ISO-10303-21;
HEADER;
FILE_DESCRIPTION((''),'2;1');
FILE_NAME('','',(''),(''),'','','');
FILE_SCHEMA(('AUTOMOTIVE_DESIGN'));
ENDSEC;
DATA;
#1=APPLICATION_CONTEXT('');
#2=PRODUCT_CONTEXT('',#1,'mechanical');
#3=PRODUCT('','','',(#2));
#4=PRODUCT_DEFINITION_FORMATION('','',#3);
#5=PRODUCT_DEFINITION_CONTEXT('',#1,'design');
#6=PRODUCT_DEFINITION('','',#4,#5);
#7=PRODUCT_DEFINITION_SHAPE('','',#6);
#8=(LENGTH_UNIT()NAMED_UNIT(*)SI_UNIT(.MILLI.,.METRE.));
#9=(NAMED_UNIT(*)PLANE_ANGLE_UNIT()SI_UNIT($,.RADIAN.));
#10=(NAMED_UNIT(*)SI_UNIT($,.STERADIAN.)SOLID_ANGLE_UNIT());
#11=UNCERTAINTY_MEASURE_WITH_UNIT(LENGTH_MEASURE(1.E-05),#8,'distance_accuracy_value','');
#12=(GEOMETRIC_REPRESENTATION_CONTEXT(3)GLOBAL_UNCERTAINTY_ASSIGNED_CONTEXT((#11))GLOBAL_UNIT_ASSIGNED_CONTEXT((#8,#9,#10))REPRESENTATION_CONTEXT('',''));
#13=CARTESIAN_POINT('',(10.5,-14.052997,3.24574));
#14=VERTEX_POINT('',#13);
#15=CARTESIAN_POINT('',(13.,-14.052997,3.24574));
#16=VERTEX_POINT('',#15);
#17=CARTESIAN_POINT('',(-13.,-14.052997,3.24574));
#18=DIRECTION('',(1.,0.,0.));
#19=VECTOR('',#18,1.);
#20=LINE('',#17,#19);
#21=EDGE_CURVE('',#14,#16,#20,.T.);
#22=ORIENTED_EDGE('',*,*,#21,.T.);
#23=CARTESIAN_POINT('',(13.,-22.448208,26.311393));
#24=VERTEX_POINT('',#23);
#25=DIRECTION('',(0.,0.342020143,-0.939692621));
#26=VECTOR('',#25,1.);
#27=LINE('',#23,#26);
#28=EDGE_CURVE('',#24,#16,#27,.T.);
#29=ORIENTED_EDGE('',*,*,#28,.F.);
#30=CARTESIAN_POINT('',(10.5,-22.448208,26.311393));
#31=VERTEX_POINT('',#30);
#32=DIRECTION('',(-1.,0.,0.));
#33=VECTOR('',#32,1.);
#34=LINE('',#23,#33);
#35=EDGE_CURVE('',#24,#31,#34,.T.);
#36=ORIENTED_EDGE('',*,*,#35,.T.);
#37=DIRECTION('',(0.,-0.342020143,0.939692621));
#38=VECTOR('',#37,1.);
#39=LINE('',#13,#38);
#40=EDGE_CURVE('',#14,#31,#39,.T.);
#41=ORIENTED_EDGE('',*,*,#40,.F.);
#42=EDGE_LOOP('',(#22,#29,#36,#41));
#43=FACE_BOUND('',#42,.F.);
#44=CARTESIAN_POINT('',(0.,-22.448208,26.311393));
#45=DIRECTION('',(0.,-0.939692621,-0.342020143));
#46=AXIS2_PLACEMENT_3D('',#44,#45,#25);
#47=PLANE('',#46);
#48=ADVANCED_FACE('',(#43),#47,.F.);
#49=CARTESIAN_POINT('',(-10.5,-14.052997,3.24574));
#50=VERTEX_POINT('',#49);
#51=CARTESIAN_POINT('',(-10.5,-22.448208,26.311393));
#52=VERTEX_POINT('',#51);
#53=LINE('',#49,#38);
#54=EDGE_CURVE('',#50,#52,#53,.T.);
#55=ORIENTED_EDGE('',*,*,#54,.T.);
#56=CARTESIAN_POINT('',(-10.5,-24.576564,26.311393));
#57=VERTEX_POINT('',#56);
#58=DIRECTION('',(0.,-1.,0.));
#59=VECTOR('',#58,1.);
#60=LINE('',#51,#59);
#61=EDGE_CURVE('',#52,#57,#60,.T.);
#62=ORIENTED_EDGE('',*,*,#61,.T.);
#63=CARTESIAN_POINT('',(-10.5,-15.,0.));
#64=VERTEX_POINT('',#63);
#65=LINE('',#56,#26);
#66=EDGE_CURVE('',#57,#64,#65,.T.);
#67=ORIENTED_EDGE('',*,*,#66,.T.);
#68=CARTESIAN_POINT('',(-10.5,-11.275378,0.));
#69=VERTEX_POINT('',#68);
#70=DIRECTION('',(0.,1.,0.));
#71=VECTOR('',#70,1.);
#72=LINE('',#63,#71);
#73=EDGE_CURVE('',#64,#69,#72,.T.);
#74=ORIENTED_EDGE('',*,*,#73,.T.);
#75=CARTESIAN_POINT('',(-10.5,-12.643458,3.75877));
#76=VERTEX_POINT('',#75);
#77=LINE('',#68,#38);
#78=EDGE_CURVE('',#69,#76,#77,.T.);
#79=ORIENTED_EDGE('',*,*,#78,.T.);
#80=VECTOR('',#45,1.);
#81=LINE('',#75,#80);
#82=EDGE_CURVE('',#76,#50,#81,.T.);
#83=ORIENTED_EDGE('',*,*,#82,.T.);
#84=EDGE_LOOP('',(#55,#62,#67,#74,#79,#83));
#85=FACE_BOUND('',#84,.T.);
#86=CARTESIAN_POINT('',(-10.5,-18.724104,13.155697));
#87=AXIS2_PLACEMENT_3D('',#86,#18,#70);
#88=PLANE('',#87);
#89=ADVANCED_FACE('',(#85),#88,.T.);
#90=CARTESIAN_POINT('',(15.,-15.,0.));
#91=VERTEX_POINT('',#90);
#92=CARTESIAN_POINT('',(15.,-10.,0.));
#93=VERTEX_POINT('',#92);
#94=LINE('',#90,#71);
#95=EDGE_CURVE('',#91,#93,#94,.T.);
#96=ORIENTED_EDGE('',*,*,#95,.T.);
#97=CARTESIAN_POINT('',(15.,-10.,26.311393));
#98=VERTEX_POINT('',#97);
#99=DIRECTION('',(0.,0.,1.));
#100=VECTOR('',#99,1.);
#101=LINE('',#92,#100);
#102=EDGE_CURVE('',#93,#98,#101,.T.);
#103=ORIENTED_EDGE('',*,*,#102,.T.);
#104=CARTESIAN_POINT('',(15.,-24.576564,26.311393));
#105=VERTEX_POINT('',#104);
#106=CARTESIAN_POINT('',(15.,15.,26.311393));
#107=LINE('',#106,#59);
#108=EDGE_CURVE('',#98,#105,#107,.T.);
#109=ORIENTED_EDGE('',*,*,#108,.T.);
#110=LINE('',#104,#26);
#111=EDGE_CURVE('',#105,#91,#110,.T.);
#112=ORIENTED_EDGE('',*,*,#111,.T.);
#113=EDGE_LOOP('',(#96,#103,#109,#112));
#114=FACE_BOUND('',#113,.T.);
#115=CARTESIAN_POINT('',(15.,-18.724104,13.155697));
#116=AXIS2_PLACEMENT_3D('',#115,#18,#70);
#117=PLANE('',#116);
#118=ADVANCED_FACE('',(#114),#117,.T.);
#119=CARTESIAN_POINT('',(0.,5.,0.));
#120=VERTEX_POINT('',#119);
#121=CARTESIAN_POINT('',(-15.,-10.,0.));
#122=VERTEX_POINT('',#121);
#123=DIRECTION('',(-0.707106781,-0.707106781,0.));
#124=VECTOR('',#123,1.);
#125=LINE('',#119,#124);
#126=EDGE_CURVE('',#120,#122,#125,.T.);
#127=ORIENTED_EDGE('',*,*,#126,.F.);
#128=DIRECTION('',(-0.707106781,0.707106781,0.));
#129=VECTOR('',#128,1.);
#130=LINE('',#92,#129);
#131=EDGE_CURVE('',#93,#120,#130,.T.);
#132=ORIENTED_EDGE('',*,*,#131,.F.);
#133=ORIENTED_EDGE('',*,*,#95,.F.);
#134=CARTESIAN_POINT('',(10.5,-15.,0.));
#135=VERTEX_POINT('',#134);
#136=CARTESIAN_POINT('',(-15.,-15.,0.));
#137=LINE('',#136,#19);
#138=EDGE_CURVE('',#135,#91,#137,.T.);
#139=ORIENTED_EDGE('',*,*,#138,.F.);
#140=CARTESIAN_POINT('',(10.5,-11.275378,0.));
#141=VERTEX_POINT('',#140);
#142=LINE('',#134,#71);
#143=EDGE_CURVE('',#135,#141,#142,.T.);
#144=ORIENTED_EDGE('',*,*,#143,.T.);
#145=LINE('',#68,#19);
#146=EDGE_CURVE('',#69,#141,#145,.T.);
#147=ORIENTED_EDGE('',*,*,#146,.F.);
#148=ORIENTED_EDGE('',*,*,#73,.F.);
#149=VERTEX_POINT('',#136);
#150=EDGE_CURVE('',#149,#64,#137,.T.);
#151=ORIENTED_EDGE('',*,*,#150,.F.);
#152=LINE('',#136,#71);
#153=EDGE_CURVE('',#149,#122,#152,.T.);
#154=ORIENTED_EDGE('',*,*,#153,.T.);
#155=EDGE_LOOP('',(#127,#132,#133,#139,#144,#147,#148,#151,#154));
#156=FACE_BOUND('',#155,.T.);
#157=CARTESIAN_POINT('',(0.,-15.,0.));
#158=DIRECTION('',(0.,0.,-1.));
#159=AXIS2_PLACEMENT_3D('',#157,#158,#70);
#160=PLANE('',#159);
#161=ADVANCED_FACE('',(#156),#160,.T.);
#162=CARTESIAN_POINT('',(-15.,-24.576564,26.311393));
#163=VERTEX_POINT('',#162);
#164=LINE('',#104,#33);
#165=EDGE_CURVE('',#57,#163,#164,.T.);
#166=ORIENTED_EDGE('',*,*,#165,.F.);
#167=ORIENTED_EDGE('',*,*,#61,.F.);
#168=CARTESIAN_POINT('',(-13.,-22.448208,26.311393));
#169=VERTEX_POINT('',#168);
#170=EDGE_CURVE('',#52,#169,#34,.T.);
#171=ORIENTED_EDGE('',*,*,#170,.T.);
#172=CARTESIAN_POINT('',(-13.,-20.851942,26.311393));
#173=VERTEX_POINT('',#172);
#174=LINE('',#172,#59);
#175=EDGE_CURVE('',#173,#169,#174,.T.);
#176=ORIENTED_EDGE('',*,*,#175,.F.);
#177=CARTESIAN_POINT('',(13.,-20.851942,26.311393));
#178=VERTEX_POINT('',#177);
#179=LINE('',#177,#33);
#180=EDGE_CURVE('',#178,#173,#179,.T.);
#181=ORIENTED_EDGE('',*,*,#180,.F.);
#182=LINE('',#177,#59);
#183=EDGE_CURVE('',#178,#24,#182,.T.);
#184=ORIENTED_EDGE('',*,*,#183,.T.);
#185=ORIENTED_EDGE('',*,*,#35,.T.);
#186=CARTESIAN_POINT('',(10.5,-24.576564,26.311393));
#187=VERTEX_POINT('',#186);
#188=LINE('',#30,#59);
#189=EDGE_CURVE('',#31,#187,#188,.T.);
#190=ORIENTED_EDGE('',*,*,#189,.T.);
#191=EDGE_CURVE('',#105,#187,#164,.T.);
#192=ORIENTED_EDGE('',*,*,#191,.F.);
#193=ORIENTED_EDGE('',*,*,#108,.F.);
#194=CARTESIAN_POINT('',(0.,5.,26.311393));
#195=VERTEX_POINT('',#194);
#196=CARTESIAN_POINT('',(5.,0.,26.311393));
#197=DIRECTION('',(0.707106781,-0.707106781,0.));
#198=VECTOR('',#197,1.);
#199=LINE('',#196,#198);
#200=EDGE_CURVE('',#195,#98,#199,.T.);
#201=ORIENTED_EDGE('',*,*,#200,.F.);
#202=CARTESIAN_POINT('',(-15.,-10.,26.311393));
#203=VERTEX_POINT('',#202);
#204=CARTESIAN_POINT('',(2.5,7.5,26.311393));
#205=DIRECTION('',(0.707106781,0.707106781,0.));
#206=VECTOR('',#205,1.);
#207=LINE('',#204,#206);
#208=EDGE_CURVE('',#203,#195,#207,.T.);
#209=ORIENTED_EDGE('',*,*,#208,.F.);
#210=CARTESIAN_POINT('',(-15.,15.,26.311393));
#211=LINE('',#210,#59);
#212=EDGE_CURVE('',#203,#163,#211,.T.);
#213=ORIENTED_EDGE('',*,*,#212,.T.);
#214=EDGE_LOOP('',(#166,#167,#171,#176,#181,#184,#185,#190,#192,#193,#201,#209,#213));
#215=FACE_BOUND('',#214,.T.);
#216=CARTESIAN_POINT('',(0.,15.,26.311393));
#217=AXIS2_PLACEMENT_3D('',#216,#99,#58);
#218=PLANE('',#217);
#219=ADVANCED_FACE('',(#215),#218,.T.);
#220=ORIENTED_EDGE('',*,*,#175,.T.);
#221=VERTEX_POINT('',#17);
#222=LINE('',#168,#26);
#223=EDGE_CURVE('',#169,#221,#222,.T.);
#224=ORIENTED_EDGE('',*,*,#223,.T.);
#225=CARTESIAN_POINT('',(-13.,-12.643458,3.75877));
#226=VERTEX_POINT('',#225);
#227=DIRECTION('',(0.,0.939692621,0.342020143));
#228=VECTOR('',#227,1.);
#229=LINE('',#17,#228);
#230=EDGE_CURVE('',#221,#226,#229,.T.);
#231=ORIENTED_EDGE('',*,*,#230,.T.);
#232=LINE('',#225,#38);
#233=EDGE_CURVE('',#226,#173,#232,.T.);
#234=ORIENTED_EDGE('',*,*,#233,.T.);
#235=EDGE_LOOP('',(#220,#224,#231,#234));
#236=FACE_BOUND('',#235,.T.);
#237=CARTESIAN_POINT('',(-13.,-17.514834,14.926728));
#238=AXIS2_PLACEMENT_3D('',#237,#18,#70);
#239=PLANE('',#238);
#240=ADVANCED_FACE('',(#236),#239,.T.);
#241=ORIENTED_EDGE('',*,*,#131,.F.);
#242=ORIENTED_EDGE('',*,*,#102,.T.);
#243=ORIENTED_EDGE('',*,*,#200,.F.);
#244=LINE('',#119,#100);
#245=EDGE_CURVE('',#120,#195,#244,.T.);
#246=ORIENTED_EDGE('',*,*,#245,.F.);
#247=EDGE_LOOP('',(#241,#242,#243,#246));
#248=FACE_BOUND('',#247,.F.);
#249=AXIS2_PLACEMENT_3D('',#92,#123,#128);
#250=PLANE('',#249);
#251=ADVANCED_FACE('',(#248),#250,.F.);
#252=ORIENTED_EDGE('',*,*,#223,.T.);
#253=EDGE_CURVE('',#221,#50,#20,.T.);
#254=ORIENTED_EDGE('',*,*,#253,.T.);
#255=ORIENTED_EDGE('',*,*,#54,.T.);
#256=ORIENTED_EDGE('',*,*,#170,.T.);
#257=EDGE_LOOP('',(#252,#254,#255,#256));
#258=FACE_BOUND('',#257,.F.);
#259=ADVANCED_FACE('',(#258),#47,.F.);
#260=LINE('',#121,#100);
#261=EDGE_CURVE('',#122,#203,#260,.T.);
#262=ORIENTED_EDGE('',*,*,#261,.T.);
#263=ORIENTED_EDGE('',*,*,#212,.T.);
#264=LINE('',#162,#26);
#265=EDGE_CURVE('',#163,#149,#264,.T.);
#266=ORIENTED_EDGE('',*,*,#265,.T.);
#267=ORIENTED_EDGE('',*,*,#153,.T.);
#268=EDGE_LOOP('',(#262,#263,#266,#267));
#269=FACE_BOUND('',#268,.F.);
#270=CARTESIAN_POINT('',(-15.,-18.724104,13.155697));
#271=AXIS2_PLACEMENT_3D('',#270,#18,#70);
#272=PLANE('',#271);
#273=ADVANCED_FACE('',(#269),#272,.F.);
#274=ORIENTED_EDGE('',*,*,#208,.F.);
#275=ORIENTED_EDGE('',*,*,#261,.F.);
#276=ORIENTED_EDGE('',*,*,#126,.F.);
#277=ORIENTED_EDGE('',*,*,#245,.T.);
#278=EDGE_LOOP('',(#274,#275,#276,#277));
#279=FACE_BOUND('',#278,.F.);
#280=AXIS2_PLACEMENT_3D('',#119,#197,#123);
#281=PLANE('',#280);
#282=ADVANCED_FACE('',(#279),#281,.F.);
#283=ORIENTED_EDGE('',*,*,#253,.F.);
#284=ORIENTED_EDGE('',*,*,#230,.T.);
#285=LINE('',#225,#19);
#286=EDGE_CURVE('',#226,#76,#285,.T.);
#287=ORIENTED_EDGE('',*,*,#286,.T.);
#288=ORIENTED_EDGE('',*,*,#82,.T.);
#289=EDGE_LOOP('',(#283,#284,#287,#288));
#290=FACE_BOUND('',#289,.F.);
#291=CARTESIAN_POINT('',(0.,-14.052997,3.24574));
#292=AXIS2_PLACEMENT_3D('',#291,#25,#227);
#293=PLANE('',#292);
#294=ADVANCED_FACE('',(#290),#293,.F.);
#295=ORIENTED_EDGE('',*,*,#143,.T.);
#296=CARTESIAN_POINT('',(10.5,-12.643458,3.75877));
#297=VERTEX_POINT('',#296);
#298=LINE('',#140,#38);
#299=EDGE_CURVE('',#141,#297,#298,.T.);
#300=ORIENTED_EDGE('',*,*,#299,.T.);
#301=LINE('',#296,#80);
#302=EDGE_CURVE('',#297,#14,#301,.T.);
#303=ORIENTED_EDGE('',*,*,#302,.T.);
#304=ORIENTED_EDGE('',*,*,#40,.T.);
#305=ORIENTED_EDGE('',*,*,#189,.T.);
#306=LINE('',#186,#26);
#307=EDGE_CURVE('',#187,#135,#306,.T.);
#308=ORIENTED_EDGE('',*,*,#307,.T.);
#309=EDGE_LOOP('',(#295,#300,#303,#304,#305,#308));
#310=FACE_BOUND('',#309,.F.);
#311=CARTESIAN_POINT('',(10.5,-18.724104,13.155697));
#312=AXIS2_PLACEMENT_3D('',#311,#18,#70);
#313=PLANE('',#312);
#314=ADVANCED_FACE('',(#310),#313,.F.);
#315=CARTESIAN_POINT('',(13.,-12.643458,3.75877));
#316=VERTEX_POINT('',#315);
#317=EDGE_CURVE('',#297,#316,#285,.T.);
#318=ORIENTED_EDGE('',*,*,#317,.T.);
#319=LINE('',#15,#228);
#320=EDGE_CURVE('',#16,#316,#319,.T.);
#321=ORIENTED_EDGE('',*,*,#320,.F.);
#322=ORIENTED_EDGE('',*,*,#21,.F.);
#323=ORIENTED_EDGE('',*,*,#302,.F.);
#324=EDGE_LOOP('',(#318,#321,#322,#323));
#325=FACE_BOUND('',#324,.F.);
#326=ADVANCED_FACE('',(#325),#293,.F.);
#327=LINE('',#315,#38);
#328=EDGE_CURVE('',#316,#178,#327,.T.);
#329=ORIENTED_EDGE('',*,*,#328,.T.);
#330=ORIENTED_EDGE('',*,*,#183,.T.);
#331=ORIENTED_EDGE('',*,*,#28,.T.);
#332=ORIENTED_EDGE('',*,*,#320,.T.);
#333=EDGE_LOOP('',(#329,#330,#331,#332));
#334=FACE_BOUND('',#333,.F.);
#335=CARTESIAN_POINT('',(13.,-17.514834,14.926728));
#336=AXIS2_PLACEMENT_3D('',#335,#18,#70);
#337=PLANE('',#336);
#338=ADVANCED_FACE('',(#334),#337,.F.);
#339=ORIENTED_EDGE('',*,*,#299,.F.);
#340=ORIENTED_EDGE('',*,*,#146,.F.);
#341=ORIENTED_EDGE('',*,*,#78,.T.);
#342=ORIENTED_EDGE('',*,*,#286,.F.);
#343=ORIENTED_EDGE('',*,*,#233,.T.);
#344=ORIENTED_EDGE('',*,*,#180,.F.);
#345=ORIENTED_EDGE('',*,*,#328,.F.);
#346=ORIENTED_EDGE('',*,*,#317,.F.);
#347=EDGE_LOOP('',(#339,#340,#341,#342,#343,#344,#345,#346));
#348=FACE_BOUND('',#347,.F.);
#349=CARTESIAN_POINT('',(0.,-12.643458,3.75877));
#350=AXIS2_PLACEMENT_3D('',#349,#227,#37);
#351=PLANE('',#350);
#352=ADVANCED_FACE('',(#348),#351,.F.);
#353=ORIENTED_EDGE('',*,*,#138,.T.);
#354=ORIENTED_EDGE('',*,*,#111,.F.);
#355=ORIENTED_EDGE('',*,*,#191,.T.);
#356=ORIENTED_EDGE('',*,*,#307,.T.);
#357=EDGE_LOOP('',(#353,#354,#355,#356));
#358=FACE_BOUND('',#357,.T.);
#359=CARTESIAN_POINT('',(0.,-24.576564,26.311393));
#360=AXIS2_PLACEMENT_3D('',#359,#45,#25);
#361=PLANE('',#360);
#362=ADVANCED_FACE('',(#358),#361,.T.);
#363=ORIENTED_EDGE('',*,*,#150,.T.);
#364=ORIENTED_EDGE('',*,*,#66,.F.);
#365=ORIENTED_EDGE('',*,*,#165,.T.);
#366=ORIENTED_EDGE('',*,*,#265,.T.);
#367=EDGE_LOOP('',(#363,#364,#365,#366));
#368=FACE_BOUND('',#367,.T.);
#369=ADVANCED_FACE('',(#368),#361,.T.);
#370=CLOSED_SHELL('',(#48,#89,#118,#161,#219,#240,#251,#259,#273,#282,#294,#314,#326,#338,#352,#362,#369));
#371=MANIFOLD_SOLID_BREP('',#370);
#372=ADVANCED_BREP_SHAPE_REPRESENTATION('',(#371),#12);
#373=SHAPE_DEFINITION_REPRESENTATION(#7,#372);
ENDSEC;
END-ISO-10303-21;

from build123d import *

# Parameters (mm, degrees)
F1_DEPTH = 15
F2_DEPTH = 13
F3_DEPTH = 10.5
F4_DEPTH = 10.5
F6_DEPTH = 30


with BuildPart() as f1:
    # F0 (on Right) → F1 (new body, symmetric)
    with BuildSketch(Plane.YZ):
        Polygon((-24.5765640131, 26.311393382), (-15, 0), (-12.871644455, 0), (-14.0529973008, 3.2457402682), (-22.4482084682, 26.311393382), align=None)
        Polygon((-22.4482084682, 26.311393382), (-14.0529973008, 3.2457402682), (-12.6434583696, 3.7587704831), (-20.8519418095, 26.311393382), align=None)
        Polygon((-14.0529973008, 3.2457402682), (-12.871644455, 0), (-11.2753777963, 0), (-12.6434583696, 3.7587704831), align=None)
        Polygon((-12.6434583696, 3.7587704831), (-11.2753777963, 0), (15, 0), (15, 26.311393382), (-20.8519418095, 26.311393382), align=None)
    extrude(amount=F1_DEPTH, both=True)

    # F0 (on Right) → F2 (cut, symmetric)
    with BuildSketch(Plane.YZ):
        Polygon((-22.4482084682, 26.311393382), (-14.0529973008, 3.2457402682), (-12.6434583696, 3.7587704831), (-20.8519418095, 26.311393382), align=None)
    extrude(amount=F2_DEPTH, both=True, mode=Mode.SUBTRACT)

    # F0 (on Right) → F3 (cut, symmetric)
    with BuildSketch(Plane.YZ):
        Polygon((-24.5765640131, 26.311393382), (-15, 0), (-12.871644455, 0), (-14.0529973008, 3.2457402682), (-22.4482084682, 26.311393382), align=None)
    extrude(amount=F3_DEPTH, both=True, mode=Mode.SUBTRACT)

    # F0 (on Right) → F4 (cut, symmetric)
    with BuildSketch(Plane.YZ):
        Polygon((-14.0529973008, 3.2457402682), (-12.871644455, 0), (-11.2753777963, 0), (-12.6434583696, 3.7587704831), align=None)
    extrude(amount=F4_DEPTH, both=True, mode=Mode.SUBTRACT)

    # F5 (on face) → F6 (cut)
    with BuildSketch(Plane(origin=(0, 0, 0), x_dir=(1, 0, 0), z_dir=(0, 0, -1))):
        Polygon((0, -5), (-15, 10), (-15, -15), (15, -15), (15, 10), align=None)
    extrude(amount=-F6_DEPTH, mode=Mode.SUBTRACT)


solid = f1.part
